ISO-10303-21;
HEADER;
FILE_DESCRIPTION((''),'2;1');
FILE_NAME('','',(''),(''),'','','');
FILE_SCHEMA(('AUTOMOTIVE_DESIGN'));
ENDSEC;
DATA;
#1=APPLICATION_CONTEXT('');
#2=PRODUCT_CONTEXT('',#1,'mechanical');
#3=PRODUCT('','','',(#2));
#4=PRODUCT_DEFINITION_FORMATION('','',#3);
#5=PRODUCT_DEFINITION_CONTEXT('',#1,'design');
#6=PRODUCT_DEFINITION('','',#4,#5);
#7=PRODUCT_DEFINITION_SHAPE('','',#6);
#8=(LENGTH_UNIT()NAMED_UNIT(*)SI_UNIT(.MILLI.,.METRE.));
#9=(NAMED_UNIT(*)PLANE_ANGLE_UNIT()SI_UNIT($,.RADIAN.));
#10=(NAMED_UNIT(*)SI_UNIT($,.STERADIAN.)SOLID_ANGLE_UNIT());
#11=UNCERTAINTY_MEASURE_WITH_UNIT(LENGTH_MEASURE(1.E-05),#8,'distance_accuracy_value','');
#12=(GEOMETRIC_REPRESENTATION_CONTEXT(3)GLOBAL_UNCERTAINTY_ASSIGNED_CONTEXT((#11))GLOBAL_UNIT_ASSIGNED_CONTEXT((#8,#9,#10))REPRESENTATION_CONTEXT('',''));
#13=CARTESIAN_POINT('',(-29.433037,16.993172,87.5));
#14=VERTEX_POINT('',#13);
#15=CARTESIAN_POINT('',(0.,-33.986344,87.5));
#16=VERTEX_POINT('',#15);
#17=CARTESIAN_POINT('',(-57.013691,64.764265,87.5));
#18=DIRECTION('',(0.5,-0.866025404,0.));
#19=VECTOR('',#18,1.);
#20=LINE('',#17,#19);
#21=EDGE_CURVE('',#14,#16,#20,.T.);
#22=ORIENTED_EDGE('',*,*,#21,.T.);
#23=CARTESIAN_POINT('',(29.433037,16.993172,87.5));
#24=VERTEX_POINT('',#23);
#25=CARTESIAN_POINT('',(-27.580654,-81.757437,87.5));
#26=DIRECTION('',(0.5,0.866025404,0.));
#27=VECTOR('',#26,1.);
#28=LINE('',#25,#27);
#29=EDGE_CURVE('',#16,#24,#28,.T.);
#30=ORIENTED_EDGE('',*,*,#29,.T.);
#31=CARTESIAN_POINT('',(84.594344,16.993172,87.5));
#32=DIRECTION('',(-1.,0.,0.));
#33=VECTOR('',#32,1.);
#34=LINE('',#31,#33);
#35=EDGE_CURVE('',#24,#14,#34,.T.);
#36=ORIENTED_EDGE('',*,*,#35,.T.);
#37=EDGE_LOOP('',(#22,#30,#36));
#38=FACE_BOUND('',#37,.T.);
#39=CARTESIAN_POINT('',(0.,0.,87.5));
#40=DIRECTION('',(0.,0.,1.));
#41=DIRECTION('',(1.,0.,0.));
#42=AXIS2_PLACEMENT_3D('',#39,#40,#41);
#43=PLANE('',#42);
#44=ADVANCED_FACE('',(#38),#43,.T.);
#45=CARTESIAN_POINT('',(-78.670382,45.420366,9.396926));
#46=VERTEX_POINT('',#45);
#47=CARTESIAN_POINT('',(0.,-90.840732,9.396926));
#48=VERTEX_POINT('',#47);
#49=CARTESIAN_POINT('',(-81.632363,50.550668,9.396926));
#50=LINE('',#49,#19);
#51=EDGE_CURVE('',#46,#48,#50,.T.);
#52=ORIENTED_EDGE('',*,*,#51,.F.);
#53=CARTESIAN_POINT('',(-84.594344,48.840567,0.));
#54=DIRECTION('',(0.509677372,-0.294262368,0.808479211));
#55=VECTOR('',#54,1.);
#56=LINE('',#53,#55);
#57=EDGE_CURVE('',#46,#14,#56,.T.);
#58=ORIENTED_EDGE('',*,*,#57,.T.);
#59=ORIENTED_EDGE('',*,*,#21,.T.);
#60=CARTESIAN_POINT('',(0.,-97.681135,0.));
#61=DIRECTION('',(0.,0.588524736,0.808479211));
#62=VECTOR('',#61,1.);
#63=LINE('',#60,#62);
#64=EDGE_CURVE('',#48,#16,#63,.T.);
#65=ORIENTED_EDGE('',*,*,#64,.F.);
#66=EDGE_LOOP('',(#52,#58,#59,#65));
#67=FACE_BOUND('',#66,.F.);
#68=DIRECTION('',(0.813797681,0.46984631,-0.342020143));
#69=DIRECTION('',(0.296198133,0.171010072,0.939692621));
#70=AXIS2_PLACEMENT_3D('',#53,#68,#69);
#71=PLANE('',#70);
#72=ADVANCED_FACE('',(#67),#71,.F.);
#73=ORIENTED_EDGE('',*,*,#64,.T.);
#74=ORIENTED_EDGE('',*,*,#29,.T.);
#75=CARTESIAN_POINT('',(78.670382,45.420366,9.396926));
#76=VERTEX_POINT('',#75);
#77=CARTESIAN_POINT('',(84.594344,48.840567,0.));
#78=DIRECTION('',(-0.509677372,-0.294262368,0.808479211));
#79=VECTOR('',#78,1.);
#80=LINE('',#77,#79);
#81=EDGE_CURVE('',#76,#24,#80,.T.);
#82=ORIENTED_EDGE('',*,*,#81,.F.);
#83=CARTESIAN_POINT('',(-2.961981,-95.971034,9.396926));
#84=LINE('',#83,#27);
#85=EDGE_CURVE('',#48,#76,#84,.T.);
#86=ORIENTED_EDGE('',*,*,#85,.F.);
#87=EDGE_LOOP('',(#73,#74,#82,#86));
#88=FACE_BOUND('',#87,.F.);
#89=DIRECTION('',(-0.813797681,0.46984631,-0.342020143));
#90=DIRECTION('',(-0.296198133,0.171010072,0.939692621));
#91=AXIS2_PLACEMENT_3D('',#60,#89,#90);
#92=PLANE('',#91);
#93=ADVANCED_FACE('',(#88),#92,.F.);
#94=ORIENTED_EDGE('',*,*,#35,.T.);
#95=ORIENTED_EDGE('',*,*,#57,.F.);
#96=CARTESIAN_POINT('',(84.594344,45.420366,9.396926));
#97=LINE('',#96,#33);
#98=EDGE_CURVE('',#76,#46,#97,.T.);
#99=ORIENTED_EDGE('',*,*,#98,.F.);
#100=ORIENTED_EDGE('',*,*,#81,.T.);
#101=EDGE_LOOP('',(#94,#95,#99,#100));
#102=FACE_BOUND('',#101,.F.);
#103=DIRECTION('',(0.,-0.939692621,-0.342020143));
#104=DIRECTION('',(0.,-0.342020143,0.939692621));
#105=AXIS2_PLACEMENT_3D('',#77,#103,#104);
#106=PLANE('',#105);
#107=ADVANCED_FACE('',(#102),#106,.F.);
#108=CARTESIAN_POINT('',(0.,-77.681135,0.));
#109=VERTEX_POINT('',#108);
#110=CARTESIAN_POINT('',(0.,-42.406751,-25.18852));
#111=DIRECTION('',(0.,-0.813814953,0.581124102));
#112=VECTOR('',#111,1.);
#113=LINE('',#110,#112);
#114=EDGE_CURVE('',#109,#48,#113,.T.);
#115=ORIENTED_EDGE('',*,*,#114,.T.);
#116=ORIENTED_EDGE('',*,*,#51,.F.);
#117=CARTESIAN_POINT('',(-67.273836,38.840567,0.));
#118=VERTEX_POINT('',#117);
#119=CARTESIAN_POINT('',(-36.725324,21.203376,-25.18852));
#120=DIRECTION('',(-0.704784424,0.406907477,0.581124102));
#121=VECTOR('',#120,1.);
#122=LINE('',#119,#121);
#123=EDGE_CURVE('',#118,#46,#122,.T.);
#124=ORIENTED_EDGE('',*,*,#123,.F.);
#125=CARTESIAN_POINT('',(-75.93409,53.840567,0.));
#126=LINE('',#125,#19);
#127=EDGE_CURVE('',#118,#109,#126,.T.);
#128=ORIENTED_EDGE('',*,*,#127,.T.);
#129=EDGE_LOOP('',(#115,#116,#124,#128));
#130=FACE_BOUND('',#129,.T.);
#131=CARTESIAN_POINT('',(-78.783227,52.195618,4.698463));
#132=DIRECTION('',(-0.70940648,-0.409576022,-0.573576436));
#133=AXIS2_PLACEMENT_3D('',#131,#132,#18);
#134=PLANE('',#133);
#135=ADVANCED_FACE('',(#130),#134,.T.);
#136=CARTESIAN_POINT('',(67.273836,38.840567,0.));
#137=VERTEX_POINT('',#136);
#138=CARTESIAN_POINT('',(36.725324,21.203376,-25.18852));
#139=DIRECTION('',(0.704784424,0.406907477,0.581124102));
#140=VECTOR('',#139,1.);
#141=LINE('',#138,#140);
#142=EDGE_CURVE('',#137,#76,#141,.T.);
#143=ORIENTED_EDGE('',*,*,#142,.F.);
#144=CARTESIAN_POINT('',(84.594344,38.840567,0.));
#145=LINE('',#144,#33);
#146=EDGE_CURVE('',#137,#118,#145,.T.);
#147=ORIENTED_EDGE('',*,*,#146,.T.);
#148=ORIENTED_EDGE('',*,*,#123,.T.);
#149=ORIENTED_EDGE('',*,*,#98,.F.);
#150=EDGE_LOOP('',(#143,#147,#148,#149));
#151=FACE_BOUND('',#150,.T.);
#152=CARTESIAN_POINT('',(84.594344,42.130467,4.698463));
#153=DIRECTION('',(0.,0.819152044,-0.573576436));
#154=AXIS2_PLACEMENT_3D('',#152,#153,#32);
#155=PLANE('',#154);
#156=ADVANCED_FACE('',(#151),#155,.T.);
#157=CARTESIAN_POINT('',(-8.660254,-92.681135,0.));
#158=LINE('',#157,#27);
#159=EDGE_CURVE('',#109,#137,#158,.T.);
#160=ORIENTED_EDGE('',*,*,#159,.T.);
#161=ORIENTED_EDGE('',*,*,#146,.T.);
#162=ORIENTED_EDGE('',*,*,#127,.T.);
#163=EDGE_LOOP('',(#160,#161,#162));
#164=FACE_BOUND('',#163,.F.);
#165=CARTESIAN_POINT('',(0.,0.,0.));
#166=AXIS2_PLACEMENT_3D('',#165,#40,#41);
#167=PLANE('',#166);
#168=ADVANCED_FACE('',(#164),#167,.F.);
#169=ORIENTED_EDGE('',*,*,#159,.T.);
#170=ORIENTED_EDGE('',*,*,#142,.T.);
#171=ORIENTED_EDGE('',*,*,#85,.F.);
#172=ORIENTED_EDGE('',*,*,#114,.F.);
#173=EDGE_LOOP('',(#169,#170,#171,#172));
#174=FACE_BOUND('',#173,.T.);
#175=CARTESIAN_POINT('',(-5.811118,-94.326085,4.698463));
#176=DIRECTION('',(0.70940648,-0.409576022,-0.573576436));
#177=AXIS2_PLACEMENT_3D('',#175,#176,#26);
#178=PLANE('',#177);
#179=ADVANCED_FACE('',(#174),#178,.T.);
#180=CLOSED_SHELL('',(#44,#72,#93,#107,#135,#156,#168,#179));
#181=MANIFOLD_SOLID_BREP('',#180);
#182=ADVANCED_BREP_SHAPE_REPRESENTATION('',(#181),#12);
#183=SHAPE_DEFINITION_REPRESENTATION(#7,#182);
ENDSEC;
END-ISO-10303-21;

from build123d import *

# Parameters (mm, degrees)
F1_DEPTH = 87.5
F1_TAPER = 20
F2_SIZE  = 10


with BuildPart() as f1:
    # F0 (on Top) → F1 (new body)
    with BuildSketch(Plane.XY):
        Polygon((84.5943443278, 48.8405674696), (-84.5943443278, 48.8405674696), (0, -97.6811349392), align=None)
    extrude(amount=F1_DEPTH, taper=F1_TAPER)

    # F2
    f2_edges = [f1.edges().sort_by_distance(p)[0] for p in [
        (42.297172, -24.420284, 0),
        (-42.297172, -24.420284, 0),
        (0, 48.840567, 0),
    ]]
    chamfer(f2_edges, length=F2_SIZE)


solid = f1.part
